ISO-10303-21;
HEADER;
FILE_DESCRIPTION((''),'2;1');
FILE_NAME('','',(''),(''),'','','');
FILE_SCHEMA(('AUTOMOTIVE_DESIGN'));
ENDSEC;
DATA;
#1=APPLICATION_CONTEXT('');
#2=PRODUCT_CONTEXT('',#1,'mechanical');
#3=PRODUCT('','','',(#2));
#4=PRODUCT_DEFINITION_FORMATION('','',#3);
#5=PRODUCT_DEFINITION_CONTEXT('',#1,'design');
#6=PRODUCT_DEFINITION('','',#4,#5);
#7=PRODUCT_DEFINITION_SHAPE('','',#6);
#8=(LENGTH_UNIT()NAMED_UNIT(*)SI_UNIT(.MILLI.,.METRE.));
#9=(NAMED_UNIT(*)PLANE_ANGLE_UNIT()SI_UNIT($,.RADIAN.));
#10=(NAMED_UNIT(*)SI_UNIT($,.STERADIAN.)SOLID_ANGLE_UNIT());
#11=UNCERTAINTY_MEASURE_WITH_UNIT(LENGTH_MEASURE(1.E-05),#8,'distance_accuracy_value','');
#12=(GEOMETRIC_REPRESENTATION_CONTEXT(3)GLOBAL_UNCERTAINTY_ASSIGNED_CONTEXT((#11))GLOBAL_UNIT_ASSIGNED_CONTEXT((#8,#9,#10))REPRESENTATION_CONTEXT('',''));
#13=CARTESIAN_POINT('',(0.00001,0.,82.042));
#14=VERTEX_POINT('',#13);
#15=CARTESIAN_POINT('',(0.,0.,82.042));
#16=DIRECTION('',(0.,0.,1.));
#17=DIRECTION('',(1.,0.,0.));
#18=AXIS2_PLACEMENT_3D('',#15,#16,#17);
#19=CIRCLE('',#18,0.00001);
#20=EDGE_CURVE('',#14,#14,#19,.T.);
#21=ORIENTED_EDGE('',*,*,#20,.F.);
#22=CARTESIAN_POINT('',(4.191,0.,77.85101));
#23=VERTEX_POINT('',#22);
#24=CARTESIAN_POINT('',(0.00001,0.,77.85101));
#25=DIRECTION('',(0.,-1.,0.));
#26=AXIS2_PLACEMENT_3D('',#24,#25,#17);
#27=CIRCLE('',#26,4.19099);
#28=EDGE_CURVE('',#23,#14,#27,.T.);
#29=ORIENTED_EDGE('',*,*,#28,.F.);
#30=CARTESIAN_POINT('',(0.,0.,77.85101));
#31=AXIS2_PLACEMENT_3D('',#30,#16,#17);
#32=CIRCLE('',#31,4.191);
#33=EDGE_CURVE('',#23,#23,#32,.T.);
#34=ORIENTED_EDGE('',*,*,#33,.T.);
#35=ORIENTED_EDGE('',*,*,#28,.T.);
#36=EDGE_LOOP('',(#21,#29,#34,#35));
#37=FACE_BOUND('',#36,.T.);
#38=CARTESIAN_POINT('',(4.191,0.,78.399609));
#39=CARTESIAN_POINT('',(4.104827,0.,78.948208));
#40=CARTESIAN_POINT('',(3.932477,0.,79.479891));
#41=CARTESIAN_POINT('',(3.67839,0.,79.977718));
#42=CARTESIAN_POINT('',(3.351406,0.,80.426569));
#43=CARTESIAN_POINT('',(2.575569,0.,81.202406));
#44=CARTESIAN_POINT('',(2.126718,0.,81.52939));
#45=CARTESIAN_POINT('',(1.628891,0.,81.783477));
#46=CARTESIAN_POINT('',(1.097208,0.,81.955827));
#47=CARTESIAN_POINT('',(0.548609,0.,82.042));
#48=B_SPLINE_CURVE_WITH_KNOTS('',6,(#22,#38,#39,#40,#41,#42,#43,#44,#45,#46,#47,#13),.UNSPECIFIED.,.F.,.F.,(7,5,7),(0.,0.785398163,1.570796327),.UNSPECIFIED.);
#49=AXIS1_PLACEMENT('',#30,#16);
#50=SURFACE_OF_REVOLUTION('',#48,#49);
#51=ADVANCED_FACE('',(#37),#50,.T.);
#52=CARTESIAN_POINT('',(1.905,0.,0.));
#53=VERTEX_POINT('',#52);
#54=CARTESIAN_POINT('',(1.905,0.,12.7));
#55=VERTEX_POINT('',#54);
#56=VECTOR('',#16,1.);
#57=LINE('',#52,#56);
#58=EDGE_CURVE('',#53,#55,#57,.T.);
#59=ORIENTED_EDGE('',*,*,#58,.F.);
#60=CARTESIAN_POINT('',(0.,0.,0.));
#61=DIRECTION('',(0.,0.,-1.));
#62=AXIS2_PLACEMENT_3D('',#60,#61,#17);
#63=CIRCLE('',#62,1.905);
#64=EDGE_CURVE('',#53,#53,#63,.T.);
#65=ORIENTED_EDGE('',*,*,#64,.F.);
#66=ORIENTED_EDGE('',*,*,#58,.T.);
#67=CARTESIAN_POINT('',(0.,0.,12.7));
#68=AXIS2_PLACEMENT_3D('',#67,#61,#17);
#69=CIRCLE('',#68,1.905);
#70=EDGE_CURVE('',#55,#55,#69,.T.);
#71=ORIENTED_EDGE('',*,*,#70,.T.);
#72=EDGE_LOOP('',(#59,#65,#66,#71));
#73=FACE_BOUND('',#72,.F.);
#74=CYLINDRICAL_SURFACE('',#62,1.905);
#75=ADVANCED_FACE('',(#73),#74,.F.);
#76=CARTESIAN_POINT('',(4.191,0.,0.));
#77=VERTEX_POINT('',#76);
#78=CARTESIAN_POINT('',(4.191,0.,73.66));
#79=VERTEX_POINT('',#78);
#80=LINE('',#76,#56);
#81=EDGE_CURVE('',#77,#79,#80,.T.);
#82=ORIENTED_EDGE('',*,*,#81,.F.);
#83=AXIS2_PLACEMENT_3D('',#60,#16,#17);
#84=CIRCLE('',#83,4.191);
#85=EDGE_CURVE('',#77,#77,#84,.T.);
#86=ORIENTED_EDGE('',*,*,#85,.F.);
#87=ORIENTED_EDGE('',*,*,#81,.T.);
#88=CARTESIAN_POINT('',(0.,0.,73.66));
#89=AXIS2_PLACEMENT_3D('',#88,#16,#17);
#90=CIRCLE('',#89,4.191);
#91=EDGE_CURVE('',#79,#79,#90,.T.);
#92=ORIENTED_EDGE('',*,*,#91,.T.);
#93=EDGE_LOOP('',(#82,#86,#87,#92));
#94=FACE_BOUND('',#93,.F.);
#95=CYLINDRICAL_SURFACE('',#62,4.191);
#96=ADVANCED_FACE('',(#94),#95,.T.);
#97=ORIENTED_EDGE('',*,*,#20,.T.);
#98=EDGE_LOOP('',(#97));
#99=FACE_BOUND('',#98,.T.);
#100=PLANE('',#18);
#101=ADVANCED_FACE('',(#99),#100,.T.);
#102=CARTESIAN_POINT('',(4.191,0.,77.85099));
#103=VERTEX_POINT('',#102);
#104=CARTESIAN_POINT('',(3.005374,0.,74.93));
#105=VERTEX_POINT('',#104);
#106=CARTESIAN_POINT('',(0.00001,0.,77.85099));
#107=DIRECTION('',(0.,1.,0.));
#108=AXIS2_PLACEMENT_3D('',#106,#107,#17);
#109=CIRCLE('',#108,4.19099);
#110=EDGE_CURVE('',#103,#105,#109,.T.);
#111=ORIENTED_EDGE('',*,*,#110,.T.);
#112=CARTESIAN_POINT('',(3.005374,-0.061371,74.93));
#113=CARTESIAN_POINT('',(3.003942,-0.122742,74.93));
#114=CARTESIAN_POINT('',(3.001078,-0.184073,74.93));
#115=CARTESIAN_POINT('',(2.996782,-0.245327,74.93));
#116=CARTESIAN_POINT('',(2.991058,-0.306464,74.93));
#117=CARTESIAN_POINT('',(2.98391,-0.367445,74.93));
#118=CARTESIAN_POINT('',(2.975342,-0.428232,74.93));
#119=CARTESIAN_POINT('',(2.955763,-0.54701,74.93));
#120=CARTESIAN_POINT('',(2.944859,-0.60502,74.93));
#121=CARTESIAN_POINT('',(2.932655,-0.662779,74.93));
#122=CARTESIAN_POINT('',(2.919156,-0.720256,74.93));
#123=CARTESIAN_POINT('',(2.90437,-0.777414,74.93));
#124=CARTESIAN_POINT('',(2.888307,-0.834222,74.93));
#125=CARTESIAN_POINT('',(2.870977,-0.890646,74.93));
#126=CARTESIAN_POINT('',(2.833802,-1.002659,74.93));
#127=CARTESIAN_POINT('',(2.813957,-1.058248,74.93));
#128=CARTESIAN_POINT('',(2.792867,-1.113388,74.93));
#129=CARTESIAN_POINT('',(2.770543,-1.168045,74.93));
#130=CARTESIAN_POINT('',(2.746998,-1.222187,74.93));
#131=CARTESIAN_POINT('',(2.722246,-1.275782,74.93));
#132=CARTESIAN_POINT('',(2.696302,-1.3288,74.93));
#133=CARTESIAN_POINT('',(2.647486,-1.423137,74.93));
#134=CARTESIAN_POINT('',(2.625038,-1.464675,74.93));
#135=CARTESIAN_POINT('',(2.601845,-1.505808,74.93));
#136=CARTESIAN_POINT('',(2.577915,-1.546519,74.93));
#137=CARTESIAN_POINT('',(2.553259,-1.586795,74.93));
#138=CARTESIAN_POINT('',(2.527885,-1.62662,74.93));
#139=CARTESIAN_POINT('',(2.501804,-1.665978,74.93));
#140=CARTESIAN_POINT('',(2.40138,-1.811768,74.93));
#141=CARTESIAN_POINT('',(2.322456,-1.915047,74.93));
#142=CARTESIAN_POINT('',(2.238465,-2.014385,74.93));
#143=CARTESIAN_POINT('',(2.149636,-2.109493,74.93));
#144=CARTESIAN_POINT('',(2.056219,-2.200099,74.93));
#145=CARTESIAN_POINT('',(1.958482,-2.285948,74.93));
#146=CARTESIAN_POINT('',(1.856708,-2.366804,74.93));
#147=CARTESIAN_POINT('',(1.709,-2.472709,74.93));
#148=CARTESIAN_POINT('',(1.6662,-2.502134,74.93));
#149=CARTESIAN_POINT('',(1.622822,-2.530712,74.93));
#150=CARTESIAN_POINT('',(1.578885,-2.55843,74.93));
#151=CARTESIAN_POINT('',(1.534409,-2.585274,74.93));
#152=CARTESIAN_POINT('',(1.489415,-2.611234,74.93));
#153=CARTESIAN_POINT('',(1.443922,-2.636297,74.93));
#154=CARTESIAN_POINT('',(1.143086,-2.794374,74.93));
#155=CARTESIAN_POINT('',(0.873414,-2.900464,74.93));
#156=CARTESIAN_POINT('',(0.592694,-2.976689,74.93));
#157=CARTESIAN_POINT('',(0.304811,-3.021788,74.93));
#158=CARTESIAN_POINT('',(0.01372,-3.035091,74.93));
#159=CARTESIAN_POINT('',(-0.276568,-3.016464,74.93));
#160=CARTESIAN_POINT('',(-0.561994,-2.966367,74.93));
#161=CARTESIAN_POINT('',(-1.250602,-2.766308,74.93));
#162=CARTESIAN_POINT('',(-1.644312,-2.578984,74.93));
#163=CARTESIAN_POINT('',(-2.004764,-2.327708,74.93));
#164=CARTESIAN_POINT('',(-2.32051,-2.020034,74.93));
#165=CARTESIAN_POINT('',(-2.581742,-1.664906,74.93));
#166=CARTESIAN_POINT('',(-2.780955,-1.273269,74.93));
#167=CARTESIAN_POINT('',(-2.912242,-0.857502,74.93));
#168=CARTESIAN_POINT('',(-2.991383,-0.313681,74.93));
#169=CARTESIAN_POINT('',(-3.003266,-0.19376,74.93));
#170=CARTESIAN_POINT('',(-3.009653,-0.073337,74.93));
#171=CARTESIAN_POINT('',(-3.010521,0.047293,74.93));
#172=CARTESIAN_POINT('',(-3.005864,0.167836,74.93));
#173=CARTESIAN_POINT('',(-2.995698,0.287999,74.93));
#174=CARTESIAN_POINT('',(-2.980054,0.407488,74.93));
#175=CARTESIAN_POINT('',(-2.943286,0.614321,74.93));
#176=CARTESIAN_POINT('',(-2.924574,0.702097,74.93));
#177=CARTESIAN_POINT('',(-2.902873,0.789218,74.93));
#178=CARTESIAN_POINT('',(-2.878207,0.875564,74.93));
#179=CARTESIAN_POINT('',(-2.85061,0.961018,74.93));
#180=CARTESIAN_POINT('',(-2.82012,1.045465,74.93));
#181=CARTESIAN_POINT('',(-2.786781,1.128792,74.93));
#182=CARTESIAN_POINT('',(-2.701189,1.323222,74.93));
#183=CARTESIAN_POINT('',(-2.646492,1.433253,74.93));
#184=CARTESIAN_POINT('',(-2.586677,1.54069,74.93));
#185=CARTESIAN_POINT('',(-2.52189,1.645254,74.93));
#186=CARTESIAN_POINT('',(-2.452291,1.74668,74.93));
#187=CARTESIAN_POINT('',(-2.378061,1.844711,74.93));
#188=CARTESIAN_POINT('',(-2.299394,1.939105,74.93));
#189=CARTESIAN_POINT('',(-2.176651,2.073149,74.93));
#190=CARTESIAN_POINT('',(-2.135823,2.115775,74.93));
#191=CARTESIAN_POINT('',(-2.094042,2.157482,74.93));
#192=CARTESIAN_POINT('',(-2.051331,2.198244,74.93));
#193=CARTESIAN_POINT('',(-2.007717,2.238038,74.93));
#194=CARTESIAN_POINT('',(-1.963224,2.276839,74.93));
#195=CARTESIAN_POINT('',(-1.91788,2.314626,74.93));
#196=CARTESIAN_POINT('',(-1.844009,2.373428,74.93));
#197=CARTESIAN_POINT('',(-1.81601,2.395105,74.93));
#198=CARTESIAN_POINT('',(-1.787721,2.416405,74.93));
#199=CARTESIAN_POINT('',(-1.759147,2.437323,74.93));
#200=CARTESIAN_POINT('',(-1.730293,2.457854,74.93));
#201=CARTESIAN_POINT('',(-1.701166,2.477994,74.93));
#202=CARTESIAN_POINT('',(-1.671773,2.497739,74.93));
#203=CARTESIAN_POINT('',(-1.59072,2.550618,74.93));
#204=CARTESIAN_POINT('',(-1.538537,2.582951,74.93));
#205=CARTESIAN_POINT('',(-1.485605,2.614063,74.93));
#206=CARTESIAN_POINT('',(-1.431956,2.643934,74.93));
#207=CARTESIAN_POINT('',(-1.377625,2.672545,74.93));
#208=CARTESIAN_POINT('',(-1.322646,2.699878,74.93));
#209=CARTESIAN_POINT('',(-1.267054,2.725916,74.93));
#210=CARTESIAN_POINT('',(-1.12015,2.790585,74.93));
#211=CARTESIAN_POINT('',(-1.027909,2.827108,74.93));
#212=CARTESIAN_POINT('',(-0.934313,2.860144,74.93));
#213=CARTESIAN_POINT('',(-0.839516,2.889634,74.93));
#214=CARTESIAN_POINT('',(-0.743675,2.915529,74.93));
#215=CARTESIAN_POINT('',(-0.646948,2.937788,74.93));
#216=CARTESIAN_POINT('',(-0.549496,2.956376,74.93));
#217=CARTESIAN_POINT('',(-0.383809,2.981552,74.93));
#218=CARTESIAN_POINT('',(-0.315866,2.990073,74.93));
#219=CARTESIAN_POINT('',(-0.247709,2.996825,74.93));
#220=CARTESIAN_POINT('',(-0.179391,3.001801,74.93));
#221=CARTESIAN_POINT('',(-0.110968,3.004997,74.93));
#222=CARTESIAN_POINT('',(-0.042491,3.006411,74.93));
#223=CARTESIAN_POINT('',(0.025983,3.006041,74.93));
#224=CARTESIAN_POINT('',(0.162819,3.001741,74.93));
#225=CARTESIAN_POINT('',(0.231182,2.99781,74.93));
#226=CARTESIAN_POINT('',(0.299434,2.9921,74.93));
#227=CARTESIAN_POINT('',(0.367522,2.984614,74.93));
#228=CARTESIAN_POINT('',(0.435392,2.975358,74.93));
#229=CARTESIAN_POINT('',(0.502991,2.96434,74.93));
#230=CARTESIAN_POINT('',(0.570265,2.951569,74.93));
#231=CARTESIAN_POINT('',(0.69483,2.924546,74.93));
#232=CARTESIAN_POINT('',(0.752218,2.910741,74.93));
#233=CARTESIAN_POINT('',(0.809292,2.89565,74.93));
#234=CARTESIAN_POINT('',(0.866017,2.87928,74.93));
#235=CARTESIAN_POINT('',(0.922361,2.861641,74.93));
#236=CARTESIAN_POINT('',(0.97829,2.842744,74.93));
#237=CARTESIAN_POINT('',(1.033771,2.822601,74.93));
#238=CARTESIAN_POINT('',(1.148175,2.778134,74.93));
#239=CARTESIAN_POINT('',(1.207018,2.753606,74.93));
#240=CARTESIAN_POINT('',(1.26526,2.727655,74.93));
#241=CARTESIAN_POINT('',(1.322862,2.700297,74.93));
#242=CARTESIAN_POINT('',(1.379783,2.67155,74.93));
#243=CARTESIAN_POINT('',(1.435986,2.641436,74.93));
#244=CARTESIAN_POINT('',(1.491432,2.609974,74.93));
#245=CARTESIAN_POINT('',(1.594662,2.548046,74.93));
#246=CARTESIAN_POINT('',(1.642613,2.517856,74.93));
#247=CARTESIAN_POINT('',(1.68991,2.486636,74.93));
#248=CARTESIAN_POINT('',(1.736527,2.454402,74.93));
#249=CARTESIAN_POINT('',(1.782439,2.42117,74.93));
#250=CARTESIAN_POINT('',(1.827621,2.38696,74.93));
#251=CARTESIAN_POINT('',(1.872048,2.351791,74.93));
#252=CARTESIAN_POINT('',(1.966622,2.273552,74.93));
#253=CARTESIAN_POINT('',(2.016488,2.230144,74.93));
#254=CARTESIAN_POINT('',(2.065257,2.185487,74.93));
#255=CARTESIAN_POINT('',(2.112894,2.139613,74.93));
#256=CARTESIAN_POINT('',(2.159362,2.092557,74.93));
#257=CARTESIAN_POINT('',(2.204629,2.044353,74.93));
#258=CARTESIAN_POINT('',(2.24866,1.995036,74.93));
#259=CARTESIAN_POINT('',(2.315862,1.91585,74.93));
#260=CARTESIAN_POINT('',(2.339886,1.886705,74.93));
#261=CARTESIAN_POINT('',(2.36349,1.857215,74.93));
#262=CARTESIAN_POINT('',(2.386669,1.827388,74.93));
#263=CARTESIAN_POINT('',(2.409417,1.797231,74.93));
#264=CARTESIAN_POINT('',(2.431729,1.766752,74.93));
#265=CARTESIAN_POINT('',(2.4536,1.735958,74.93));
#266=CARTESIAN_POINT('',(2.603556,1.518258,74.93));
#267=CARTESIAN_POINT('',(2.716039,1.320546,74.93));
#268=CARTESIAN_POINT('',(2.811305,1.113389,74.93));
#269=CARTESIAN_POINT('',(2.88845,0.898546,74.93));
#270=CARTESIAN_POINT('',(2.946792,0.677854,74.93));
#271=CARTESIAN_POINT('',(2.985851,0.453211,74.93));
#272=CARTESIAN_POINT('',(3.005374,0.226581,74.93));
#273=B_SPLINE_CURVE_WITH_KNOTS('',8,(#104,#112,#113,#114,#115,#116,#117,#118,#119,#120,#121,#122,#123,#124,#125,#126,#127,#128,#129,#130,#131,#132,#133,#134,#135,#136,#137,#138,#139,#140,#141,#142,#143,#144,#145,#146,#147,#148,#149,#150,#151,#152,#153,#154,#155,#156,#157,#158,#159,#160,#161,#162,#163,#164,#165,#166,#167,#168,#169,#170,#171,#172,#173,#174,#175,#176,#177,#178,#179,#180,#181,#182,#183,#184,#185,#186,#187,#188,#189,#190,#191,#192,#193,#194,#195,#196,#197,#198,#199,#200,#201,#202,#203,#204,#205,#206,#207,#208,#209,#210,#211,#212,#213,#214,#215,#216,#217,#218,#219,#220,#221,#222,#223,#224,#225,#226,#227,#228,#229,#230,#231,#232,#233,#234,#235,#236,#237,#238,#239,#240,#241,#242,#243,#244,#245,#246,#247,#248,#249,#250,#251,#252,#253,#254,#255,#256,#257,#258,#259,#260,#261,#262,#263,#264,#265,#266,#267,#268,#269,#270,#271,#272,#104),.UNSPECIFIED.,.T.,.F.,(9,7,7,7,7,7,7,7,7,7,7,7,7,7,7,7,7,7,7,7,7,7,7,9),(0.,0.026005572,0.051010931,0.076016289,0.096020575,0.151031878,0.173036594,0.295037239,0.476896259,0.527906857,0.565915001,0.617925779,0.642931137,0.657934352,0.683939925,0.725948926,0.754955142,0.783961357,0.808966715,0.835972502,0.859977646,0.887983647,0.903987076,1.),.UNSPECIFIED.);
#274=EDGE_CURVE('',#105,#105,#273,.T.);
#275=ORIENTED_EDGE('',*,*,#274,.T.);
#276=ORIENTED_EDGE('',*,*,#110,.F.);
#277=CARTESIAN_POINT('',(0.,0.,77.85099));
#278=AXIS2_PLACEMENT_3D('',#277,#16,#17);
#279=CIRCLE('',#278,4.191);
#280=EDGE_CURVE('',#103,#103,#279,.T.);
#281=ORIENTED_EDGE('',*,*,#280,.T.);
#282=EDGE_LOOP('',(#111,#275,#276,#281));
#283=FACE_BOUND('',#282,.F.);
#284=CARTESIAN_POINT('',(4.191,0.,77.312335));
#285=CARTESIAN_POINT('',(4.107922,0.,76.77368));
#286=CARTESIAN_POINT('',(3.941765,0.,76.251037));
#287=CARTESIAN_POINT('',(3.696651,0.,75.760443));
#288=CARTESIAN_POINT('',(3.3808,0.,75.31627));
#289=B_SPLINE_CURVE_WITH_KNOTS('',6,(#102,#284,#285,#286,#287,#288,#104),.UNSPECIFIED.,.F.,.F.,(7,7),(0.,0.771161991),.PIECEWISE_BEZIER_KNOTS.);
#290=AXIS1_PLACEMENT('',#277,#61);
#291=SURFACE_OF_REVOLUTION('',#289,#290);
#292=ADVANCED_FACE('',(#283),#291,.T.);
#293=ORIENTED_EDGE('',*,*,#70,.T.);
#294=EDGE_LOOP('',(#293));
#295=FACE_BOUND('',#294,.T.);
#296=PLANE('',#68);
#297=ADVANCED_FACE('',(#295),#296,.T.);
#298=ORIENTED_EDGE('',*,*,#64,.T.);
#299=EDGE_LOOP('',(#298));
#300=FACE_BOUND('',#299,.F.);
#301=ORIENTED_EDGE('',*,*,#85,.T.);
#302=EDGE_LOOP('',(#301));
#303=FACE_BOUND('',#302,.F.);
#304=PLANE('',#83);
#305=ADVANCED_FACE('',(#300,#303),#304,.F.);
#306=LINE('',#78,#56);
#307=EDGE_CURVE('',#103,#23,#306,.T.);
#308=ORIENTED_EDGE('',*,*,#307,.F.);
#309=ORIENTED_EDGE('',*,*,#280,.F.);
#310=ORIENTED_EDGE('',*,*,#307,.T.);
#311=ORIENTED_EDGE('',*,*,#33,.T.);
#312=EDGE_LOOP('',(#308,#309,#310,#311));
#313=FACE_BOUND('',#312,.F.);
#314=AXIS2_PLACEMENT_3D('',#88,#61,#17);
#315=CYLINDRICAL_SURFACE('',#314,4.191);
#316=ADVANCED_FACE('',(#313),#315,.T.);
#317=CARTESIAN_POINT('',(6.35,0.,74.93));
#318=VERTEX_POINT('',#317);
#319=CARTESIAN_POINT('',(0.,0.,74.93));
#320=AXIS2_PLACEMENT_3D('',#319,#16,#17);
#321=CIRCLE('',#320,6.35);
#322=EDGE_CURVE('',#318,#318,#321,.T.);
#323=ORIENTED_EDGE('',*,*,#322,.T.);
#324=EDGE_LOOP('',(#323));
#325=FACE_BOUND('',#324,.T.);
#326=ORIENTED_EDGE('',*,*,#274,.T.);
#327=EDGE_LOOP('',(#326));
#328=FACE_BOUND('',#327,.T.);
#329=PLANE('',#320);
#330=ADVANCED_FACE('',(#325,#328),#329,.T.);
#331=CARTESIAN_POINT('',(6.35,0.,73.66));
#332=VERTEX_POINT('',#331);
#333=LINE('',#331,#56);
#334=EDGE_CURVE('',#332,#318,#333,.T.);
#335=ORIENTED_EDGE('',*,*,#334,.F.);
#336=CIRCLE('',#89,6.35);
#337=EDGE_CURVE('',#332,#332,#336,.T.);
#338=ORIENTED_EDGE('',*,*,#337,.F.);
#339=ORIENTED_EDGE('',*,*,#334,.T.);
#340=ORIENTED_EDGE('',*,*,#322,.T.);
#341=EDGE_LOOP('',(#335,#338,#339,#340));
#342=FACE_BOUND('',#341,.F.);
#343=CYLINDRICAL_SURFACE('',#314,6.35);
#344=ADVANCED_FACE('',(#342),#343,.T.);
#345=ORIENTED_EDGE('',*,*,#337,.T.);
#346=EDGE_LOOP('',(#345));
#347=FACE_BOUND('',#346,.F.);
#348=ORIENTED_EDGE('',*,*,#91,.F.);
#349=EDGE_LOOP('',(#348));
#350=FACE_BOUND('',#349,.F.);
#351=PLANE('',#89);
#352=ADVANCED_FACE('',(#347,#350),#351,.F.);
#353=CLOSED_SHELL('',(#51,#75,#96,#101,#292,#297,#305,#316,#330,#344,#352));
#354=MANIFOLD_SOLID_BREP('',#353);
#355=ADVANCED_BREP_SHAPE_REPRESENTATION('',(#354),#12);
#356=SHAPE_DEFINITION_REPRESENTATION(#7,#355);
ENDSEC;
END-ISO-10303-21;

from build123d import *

# Parameters (mm, degrees)
F0_R     = 4.191
F1_DEPTH = 73.66
F2_R     = 4.191
F3_DEPTH = 8.382
F4_R     = 4.19099
F5_R     = 6.35
F6_DEPTH = 1.27
F7_R     = 1.905
F8_DEPTH = 12.7


# Not quite as in the source:
# - a fillet or chamfer is up to 0.001 mm smaller than in the source, because OpenCascade refuses the exact size


with BuildPart() as f1:
    # F0 (on Top) → F1 (new body)
    with BuildSketch(Plane.XY):
        Circle(F0_R)
    extrude(amount=F1_DEPTH)



with BuildPart() as f3:
    # F2 (on face) → F3 (new body)
    with BuildSketch(Plane.XY.offset(73.66)):
        Circle(F2_R)
    extrude(amount=F3_DEPTH)

    # F4 (radius 4.191 in the source; OpenCascade refuses exactly that, so slightly less here)
    f4_edges = [f3.edges().sort_by_distance(p)[0] for p in [
        (-4.191, 0, 73.66),
        (-4.191, 0, 82.042),
    ]]
    fillet(f4_edges, radius=F4_R)


with BuildPart() as f1_1:
    add(f1.part)

    add(f3.part)  # F6 merges F3
    # F5 (on face) → F6 (join)
    with BuildSketch(Plane.XY.offset(73.66)):
        Circle(F5_R)
    extrude(amount=F6_DEPTH)

    # F7 (on face) → F8 (cut)
    with BuildSketch(Plane(origin=(0, 0, 0), x_dir=(1, 0, 0), z_dir=(0, 0, -1))):
        Circle(F7_R)
    extrude(amount=-F8_DEPTH, mode=Mode.SUBTRACT)


solid = f1_1.part
